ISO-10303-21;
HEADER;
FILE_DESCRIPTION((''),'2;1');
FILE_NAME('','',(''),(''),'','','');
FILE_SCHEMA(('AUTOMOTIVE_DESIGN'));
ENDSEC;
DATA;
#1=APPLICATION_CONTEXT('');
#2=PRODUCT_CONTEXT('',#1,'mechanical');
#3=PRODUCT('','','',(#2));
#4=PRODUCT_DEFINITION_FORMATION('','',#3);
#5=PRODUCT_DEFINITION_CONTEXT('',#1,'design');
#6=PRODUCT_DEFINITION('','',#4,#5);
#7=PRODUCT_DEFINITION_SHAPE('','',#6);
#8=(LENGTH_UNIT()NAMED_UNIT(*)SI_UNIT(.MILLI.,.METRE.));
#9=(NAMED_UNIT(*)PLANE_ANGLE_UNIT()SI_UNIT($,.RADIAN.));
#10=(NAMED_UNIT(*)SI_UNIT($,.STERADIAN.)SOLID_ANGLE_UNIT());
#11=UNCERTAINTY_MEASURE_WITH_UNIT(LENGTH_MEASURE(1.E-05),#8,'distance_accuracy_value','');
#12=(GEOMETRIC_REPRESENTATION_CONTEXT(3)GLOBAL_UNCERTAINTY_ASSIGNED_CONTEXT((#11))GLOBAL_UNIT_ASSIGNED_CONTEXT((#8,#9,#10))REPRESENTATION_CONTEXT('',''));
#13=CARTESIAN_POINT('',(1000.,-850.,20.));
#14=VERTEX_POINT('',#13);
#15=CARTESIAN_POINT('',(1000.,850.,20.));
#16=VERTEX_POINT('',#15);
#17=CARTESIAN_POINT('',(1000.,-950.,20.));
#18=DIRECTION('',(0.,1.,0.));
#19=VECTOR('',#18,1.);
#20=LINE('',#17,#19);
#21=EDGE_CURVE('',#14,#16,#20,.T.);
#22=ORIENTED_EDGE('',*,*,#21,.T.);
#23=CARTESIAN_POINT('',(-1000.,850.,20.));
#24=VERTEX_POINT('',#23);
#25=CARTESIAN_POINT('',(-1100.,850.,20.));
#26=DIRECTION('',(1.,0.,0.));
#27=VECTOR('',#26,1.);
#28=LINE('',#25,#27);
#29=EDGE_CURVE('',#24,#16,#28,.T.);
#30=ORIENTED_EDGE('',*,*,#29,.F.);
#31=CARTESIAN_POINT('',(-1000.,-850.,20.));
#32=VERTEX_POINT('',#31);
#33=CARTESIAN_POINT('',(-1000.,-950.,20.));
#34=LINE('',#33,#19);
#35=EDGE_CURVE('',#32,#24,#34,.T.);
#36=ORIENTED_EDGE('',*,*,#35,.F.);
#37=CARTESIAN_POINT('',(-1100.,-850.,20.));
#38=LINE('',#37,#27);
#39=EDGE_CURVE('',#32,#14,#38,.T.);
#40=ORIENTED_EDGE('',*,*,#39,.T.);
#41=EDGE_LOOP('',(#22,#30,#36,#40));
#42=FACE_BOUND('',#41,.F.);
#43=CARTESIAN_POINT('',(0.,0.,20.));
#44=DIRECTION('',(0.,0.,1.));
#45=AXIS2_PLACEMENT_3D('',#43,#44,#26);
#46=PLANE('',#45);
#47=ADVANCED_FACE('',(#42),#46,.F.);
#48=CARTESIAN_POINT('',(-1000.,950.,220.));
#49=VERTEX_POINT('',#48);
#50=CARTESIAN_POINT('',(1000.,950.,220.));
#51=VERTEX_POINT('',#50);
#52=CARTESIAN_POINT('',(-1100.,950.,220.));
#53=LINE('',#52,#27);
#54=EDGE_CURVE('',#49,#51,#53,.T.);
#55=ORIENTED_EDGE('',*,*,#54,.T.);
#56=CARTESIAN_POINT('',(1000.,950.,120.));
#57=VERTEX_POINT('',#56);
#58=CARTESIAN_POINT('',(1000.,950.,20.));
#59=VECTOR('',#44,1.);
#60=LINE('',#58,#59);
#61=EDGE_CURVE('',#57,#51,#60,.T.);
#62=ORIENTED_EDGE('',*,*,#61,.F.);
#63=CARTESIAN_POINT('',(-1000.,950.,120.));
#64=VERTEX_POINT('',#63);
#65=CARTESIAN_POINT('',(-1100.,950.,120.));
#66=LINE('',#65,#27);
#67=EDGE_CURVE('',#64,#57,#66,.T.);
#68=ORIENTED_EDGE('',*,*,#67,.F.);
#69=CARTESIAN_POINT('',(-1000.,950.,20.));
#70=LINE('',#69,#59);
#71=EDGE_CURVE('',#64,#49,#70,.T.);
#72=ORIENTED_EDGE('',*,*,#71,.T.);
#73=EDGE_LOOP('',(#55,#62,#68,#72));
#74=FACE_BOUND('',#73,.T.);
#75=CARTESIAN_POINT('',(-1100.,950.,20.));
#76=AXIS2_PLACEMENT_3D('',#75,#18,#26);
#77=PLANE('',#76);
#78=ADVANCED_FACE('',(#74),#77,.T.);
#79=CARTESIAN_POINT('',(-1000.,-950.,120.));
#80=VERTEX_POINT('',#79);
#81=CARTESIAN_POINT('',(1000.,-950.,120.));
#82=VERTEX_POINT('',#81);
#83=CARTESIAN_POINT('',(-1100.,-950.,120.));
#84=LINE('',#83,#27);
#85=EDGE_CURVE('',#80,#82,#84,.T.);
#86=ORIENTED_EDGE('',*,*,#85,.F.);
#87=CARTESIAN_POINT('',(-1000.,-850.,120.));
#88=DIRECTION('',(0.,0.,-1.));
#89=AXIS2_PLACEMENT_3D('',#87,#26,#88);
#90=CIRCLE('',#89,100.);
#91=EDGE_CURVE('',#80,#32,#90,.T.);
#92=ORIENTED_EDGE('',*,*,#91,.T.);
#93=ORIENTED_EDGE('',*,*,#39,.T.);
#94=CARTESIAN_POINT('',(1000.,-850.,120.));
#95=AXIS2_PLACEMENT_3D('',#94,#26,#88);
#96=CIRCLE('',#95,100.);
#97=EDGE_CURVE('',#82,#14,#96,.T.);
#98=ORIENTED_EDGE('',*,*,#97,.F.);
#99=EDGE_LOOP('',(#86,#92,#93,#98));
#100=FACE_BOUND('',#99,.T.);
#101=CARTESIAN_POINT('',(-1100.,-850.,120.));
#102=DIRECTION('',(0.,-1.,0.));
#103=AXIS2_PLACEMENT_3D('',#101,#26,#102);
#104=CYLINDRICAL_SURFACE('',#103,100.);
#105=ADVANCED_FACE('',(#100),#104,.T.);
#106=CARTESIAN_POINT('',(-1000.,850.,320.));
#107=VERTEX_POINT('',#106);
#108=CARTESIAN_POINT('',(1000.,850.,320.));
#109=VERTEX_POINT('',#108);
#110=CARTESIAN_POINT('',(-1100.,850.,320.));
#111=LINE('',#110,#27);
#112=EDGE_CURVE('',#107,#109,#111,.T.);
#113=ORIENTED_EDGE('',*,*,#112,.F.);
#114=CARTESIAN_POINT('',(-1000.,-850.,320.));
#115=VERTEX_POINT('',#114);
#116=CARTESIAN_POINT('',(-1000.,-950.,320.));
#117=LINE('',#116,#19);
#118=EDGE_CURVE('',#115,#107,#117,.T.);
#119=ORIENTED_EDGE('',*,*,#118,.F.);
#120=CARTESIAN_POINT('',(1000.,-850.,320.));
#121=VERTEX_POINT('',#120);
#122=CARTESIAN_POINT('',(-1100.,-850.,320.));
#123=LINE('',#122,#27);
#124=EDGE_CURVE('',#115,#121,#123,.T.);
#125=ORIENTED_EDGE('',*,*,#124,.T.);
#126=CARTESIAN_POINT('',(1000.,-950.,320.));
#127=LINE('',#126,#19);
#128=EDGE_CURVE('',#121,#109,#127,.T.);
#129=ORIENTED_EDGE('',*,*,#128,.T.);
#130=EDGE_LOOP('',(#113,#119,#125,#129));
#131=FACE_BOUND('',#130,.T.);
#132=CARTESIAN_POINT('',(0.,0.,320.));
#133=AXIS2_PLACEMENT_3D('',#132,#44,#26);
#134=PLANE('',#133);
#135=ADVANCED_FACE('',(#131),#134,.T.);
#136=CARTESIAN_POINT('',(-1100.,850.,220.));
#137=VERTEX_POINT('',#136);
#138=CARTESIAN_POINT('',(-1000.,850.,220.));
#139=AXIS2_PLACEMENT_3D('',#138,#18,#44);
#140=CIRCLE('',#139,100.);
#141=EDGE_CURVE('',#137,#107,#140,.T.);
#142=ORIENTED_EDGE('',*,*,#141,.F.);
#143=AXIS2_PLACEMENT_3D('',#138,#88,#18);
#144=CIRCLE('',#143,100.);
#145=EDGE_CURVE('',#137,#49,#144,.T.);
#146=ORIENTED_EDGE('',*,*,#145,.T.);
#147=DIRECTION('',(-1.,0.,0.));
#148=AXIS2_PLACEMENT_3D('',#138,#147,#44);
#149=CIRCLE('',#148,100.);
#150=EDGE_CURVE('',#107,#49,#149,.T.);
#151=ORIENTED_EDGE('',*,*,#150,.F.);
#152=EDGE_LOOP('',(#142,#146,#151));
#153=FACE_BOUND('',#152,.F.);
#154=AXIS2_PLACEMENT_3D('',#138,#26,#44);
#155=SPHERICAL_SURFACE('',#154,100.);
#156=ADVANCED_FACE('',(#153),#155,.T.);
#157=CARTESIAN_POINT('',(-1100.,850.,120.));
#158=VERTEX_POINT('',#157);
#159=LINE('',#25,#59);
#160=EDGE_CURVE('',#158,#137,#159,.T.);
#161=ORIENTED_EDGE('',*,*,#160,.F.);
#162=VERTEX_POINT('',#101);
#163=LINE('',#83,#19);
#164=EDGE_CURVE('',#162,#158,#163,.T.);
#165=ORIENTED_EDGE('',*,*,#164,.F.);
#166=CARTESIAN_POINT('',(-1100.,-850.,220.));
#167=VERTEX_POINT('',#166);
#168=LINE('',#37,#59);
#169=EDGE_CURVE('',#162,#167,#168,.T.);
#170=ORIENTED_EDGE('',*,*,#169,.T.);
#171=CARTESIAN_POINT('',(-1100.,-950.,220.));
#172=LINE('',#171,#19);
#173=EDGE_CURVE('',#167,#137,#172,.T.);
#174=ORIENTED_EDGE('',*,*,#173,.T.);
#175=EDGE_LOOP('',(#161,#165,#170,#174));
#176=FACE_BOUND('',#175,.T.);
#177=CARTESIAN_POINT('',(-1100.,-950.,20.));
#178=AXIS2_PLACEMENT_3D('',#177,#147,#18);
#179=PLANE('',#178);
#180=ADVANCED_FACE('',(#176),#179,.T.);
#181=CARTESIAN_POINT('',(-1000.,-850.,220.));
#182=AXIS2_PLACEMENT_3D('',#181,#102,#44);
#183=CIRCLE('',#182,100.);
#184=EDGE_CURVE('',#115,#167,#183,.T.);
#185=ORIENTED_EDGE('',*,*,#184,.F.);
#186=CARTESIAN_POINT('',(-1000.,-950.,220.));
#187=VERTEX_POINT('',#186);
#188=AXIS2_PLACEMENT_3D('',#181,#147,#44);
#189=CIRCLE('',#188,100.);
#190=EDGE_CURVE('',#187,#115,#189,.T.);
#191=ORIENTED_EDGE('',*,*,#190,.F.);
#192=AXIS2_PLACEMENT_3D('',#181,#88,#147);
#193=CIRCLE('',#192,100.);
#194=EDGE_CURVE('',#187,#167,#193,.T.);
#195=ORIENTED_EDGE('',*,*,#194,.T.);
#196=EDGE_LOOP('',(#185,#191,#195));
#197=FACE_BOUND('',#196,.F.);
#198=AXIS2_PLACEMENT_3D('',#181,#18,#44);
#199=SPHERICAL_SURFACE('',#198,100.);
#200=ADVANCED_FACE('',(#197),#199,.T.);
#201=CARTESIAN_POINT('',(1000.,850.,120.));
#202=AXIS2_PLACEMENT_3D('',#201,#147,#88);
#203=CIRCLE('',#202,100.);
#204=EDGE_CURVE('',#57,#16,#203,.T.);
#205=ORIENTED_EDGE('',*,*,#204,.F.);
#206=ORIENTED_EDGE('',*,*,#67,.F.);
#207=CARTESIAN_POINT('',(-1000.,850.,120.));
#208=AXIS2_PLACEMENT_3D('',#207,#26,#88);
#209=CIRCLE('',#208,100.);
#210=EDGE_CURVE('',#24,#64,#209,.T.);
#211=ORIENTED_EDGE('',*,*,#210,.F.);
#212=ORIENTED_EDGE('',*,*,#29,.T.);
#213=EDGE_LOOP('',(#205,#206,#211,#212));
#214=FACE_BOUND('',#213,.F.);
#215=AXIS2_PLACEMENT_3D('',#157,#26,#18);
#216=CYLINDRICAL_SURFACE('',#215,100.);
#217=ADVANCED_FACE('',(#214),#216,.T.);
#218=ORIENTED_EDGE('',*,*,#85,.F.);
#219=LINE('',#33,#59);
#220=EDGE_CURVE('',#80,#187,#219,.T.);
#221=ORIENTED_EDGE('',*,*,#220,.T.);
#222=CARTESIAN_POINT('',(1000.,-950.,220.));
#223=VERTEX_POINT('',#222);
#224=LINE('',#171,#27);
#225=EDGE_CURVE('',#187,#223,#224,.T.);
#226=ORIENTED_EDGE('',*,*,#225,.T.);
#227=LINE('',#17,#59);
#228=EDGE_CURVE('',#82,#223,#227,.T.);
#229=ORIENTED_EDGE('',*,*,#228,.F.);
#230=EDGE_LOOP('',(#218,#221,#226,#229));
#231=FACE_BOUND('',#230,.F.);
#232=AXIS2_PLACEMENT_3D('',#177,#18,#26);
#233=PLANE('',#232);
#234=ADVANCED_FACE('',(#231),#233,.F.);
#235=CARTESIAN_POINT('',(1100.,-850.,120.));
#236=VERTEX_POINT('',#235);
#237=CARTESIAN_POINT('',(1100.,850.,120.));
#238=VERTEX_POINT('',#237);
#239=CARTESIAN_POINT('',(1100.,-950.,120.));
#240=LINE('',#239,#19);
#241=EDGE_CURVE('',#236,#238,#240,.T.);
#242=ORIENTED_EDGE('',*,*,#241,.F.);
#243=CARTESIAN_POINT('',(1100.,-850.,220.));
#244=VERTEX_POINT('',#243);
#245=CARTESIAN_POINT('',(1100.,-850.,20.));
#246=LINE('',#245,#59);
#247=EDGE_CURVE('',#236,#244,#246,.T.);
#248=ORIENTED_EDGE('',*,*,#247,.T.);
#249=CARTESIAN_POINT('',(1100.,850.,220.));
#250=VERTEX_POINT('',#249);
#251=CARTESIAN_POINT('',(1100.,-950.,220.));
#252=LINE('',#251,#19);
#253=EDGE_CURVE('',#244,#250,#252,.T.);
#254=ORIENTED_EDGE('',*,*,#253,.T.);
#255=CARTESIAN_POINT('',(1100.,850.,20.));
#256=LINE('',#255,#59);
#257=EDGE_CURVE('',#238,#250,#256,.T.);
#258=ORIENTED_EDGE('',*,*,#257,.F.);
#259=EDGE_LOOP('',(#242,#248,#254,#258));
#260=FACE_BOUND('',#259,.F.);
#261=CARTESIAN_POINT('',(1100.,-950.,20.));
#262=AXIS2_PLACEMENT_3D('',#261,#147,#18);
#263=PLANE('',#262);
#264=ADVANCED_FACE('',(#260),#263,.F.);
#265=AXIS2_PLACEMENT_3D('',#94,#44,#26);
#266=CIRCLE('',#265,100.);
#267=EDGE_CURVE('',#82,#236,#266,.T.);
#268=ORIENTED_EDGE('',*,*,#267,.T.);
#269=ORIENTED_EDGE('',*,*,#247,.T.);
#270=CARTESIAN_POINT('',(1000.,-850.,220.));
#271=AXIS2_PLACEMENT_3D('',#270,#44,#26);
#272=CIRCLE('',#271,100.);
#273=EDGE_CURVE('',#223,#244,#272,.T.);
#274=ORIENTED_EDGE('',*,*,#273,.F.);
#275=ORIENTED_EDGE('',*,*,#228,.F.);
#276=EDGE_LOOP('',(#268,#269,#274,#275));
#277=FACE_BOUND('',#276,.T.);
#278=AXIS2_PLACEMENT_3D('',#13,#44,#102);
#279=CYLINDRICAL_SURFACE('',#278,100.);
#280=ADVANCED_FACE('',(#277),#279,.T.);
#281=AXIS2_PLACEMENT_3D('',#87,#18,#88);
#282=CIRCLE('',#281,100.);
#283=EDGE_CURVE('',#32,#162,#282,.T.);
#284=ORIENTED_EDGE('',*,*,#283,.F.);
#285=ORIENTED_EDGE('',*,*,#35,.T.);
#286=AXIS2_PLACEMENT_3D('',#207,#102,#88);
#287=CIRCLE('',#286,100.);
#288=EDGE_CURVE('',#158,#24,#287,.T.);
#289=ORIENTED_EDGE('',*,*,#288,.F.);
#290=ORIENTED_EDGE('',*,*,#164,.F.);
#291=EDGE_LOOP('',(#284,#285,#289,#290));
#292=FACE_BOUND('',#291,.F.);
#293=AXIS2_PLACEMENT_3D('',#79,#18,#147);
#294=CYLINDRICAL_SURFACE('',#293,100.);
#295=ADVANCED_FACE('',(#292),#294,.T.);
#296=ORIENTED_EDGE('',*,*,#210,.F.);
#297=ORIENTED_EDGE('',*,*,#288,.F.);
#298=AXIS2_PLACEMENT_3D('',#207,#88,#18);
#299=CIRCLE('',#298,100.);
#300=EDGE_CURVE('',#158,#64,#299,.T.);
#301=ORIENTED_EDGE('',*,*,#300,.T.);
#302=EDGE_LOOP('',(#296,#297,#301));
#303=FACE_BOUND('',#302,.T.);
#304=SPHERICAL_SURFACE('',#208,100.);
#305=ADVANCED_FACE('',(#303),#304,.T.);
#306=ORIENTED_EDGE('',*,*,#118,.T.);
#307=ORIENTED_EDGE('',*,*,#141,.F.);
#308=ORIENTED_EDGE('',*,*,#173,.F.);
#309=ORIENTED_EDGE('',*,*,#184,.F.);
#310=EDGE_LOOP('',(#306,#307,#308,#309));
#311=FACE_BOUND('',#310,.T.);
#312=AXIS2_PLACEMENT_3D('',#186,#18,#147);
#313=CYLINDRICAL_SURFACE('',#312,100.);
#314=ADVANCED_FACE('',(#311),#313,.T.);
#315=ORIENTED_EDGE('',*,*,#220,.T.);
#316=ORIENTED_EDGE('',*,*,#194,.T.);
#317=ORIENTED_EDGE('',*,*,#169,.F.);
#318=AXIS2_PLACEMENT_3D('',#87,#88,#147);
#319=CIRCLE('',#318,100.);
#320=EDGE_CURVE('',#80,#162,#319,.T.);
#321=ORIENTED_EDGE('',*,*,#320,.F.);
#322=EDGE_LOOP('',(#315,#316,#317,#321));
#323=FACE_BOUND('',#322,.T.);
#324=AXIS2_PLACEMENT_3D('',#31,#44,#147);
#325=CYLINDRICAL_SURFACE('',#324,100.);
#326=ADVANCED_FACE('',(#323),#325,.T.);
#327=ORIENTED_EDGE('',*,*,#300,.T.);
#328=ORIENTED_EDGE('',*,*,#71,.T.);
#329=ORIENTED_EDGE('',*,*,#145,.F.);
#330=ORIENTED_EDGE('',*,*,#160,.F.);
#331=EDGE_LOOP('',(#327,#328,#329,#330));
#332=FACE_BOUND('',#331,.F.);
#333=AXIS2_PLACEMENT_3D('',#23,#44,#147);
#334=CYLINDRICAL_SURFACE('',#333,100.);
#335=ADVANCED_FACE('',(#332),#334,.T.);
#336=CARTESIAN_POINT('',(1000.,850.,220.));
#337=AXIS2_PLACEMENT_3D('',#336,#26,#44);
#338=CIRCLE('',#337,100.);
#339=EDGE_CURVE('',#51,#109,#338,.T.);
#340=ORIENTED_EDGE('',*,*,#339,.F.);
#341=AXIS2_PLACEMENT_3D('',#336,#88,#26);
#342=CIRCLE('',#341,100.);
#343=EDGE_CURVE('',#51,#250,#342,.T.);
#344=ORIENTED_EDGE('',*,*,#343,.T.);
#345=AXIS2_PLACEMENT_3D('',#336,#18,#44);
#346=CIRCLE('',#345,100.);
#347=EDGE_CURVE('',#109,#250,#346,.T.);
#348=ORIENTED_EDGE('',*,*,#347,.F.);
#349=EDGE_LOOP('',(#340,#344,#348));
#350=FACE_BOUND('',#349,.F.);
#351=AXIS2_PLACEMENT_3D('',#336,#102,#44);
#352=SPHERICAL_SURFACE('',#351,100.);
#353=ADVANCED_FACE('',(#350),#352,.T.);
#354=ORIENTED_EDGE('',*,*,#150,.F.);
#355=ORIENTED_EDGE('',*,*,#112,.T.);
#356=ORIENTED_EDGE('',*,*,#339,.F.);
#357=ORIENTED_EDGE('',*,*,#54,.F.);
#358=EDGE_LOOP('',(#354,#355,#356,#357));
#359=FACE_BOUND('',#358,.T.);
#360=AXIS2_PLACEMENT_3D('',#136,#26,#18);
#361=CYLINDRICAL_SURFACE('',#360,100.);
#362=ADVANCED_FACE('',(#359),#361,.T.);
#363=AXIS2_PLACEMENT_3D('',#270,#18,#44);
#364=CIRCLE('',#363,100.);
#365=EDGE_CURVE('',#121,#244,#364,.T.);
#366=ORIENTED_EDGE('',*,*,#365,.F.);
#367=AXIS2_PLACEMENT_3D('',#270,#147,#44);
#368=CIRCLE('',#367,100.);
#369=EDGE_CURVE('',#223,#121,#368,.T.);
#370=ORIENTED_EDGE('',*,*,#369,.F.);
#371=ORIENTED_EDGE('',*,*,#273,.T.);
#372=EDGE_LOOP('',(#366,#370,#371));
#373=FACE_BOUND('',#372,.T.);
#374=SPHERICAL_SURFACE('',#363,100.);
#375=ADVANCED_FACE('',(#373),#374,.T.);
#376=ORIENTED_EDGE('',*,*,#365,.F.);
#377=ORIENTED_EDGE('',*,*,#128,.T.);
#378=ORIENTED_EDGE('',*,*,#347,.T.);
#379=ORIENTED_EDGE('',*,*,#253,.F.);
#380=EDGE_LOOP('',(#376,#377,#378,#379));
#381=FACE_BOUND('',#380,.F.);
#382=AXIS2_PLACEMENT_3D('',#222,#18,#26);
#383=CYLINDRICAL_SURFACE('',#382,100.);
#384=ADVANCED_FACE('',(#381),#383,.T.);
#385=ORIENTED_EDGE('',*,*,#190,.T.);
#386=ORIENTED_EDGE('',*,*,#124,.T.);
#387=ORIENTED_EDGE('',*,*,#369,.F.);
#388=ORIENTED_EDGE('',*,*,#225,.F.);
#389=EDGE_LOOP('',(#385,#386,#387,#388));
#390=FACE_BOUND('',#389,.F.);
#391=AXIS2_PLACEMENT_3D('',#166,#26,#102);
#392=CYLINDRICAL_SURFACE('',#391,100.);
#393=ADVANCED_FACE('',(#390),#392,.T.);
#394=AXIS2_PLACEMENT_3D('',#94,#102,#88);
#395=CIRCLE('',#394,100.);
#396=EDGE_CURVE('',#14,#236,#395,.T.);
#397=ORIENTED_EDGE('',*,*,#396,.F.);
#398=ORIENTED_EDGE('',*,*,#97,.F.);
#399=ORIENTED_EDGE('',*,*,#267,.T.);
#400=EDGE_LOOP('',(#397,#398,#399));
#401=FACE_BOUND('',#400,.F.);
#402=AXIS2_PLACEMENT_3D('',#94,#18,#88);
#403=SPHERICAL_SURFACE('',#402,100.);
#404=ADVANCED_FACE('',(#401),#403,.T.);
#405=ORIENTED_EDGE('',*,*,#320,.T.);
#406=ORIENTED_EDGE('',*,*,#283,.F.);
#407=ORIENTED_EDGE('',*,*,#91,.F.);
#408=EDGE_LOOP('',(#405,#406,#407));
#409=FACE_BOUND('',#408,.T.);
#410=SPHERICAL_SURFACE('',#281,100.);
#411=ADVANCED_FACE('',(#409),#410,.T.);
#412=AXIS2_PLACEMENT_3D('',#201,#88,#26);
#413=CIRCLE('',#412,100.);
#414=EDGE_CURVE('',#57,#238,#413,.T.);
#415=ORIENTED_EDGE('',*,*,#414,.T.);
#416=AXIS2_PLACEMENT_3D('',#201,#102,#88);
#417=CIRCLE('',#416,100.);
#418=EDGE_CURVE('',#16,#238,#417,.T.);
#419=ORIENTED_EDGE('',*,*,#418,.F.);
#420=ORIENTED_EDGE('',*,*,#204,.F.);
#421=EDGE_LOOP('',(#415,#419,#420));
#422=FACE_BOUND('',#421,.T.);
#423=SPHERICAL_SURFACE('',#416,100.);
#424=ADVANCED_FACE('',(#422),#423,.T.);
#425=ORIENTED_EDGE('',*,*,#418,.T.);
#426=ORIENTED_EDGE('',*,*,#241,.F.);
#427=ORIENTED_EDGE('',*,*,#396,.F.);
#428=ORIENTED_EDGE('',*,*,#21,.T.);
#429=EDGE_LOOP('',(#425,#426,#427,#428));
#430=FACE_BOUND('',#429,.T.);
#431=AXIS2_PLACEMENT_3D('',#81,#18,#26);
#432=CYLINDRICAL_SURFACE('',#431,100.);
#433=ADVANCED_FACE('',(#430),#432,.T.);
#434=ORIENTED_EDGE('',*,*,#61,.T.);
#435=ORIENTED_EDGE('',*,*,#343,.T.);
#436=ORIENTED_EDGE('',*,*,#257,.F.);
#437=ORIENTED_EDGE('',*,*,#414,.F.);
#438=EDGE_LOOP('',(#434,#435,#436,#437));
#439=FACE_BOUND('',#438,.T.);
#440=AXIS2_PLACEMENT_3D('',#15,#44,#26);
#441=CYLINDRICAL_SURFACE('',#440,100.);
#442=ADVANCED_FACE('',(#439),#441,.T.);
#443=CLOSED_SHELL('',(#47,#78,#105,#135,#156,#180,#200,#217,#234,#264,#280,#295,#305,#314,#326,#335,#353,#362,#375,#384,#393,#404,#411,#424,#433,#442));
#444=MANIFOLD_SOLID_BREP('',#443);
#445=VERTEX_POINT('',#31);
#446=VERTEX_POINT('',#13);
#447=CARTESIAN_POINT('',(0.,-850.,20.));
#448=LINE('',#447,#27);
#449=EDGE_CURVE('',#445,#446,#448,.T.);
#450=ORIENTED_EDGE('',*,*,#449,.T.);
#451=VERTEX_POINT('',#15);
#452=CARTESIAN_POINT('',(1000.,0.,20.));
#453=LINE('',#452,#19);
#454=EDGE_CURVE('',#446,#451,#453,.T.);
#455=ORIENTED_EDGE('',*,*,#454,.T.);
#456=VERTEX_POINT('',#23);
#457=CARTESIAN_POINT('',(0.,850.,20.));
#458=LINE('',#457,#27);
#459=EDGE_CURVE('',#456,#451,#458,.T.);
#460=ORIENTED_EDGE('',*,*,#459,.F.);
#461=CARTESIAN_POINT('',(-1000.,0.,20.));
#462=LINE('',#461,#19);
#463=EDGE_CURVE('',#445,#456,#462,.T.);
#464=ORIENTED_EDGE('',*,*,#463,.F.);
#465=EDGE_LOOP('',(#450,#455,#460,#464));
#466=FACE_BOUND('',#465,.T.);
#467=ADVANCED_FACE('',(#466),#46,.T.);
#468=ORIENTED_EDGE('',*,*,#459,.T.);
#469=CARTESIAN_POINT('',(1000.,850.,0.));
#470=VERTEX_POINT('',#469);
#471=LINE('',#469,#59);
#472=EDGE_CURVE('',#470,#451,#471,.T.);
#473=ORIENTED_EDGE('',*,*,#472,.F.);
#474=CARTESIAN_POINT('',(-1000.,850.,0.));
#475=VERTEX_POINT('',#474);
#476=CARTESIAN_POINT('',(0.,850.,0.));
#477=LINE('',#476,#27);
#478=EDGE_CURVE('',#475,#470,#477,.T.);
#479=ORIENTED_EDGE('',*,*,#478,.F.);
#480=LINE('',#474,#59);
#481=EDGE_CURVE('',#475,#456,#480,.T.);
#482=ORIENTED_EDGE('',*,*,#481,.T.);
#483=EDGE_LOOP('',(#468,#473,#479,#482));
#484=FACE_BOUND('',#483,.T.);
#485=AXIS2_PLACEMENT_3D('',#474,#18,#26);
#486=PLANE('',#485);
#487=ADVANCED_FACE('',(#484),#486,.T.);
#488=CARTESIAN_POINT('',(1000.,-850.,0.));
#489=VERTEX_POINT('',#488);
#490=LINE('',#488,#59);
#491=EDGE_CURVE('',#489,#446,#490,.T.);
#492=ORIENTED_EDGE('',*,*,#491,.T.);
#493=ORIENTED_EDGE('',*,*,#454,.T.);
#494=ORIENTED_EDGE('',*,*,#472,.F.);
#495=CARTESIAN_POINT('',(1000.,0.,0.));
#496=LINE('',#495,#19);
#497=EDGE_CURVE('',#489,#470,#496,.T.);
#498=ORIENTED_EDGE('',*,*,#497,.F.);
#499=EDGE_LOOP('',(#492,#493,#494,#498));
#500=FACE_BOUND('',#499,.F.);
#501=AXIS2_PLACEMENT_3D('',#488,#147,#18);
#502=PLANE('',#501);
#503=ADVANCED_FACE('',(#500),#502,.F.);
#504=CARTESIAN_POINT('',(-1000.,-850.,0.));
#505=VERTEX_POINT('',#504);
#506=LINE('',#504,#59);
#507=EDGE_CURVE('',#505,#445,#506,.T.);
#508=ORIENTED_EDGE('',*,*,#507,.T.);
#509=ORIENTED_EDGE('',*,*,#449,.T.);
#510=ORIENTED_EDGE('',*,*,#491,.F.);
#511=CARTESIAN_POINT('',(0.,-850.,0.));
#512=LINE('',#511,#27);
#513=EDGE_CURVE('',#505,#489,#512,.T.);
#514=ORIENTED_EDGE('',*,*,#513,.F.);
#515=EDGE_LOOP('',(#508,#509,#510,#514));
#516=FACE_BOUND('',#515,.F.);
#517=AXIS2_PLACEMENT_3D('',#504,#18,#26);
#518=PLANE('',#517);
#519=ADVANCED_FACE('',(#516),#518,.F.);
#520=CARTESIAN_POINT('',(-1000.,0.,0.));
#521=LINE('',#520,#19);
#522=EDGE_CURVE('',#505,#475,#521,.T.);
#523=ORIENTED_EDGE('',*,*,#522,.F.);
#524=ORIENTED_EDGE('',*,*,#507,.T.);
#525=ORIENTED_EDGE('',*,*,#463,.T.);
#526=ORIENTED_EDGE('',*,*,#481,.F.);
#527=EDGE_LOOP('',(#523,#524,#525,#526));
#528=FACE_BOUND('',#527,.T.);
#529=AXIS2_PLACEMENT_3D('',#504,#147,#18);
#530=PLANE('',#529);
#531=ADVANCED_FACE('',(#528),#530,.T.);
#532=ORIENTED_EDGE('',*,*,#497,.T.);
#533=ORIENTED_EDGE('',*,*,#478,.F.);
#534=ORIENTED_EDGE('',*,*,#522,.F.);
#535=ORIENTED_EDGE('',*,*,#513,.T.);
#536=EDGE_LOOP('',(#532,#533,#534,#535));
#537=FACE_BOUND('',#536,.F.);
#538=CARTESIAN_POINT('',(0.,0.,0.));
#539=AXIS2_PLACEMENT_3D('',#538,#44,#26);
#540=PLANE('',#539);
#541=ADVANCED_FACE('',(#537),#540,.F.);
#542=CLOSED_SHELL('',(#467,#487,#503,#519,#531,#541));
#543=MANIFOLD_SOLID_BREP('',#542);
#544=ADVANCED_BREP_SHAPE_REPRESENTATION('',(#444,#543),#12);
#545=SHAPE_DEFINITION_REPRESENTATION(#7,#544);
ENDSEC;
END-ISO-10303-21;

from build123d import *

# Parameters (mm, degrees)
F0_W     = 2000
F0_H     = 1700
F1_DEPTH = 20
F2_W     = 2200
F2_H     = 1900
F3_DEPTH = 300
F4_R     = 100


with BuildPart() as f1:
    # F0 (on Top) → F1 (new body)
    with BuildSketch(Plane.XY):
        Rectangle(F0_W, F0_H)
    extrude(amount=F1_DEPTH)


with BuildPart() as f3:
    # F2 (on face) → F3 (new body)
    with BuildSketch(Plane.XY.offset(20)):
        Rectangle(F2_W, F2_H)
    extrude(amount=F3_DEPTH)

    # F4
    f4_edges = [f3.edges().sort_by_distance(p)[0] for p in [
        (1100, 0, 320),
        (0, 950, 320),
        (-1100, 0, 320),
        (0, -950, 320),
        (1100, 0, 20),
        (0, 950, 20),
        (-1100, 0, 20),
        (0, -950, 20),
        (1100, -950, 170),
        (1100, 950, 170),
        (-1100, 950, 170),
        (-1100, -950, 170),
    ]]
    fillet(f4_edges, radius=F4_R)


solid = Compound([f1.part, f3.part])
